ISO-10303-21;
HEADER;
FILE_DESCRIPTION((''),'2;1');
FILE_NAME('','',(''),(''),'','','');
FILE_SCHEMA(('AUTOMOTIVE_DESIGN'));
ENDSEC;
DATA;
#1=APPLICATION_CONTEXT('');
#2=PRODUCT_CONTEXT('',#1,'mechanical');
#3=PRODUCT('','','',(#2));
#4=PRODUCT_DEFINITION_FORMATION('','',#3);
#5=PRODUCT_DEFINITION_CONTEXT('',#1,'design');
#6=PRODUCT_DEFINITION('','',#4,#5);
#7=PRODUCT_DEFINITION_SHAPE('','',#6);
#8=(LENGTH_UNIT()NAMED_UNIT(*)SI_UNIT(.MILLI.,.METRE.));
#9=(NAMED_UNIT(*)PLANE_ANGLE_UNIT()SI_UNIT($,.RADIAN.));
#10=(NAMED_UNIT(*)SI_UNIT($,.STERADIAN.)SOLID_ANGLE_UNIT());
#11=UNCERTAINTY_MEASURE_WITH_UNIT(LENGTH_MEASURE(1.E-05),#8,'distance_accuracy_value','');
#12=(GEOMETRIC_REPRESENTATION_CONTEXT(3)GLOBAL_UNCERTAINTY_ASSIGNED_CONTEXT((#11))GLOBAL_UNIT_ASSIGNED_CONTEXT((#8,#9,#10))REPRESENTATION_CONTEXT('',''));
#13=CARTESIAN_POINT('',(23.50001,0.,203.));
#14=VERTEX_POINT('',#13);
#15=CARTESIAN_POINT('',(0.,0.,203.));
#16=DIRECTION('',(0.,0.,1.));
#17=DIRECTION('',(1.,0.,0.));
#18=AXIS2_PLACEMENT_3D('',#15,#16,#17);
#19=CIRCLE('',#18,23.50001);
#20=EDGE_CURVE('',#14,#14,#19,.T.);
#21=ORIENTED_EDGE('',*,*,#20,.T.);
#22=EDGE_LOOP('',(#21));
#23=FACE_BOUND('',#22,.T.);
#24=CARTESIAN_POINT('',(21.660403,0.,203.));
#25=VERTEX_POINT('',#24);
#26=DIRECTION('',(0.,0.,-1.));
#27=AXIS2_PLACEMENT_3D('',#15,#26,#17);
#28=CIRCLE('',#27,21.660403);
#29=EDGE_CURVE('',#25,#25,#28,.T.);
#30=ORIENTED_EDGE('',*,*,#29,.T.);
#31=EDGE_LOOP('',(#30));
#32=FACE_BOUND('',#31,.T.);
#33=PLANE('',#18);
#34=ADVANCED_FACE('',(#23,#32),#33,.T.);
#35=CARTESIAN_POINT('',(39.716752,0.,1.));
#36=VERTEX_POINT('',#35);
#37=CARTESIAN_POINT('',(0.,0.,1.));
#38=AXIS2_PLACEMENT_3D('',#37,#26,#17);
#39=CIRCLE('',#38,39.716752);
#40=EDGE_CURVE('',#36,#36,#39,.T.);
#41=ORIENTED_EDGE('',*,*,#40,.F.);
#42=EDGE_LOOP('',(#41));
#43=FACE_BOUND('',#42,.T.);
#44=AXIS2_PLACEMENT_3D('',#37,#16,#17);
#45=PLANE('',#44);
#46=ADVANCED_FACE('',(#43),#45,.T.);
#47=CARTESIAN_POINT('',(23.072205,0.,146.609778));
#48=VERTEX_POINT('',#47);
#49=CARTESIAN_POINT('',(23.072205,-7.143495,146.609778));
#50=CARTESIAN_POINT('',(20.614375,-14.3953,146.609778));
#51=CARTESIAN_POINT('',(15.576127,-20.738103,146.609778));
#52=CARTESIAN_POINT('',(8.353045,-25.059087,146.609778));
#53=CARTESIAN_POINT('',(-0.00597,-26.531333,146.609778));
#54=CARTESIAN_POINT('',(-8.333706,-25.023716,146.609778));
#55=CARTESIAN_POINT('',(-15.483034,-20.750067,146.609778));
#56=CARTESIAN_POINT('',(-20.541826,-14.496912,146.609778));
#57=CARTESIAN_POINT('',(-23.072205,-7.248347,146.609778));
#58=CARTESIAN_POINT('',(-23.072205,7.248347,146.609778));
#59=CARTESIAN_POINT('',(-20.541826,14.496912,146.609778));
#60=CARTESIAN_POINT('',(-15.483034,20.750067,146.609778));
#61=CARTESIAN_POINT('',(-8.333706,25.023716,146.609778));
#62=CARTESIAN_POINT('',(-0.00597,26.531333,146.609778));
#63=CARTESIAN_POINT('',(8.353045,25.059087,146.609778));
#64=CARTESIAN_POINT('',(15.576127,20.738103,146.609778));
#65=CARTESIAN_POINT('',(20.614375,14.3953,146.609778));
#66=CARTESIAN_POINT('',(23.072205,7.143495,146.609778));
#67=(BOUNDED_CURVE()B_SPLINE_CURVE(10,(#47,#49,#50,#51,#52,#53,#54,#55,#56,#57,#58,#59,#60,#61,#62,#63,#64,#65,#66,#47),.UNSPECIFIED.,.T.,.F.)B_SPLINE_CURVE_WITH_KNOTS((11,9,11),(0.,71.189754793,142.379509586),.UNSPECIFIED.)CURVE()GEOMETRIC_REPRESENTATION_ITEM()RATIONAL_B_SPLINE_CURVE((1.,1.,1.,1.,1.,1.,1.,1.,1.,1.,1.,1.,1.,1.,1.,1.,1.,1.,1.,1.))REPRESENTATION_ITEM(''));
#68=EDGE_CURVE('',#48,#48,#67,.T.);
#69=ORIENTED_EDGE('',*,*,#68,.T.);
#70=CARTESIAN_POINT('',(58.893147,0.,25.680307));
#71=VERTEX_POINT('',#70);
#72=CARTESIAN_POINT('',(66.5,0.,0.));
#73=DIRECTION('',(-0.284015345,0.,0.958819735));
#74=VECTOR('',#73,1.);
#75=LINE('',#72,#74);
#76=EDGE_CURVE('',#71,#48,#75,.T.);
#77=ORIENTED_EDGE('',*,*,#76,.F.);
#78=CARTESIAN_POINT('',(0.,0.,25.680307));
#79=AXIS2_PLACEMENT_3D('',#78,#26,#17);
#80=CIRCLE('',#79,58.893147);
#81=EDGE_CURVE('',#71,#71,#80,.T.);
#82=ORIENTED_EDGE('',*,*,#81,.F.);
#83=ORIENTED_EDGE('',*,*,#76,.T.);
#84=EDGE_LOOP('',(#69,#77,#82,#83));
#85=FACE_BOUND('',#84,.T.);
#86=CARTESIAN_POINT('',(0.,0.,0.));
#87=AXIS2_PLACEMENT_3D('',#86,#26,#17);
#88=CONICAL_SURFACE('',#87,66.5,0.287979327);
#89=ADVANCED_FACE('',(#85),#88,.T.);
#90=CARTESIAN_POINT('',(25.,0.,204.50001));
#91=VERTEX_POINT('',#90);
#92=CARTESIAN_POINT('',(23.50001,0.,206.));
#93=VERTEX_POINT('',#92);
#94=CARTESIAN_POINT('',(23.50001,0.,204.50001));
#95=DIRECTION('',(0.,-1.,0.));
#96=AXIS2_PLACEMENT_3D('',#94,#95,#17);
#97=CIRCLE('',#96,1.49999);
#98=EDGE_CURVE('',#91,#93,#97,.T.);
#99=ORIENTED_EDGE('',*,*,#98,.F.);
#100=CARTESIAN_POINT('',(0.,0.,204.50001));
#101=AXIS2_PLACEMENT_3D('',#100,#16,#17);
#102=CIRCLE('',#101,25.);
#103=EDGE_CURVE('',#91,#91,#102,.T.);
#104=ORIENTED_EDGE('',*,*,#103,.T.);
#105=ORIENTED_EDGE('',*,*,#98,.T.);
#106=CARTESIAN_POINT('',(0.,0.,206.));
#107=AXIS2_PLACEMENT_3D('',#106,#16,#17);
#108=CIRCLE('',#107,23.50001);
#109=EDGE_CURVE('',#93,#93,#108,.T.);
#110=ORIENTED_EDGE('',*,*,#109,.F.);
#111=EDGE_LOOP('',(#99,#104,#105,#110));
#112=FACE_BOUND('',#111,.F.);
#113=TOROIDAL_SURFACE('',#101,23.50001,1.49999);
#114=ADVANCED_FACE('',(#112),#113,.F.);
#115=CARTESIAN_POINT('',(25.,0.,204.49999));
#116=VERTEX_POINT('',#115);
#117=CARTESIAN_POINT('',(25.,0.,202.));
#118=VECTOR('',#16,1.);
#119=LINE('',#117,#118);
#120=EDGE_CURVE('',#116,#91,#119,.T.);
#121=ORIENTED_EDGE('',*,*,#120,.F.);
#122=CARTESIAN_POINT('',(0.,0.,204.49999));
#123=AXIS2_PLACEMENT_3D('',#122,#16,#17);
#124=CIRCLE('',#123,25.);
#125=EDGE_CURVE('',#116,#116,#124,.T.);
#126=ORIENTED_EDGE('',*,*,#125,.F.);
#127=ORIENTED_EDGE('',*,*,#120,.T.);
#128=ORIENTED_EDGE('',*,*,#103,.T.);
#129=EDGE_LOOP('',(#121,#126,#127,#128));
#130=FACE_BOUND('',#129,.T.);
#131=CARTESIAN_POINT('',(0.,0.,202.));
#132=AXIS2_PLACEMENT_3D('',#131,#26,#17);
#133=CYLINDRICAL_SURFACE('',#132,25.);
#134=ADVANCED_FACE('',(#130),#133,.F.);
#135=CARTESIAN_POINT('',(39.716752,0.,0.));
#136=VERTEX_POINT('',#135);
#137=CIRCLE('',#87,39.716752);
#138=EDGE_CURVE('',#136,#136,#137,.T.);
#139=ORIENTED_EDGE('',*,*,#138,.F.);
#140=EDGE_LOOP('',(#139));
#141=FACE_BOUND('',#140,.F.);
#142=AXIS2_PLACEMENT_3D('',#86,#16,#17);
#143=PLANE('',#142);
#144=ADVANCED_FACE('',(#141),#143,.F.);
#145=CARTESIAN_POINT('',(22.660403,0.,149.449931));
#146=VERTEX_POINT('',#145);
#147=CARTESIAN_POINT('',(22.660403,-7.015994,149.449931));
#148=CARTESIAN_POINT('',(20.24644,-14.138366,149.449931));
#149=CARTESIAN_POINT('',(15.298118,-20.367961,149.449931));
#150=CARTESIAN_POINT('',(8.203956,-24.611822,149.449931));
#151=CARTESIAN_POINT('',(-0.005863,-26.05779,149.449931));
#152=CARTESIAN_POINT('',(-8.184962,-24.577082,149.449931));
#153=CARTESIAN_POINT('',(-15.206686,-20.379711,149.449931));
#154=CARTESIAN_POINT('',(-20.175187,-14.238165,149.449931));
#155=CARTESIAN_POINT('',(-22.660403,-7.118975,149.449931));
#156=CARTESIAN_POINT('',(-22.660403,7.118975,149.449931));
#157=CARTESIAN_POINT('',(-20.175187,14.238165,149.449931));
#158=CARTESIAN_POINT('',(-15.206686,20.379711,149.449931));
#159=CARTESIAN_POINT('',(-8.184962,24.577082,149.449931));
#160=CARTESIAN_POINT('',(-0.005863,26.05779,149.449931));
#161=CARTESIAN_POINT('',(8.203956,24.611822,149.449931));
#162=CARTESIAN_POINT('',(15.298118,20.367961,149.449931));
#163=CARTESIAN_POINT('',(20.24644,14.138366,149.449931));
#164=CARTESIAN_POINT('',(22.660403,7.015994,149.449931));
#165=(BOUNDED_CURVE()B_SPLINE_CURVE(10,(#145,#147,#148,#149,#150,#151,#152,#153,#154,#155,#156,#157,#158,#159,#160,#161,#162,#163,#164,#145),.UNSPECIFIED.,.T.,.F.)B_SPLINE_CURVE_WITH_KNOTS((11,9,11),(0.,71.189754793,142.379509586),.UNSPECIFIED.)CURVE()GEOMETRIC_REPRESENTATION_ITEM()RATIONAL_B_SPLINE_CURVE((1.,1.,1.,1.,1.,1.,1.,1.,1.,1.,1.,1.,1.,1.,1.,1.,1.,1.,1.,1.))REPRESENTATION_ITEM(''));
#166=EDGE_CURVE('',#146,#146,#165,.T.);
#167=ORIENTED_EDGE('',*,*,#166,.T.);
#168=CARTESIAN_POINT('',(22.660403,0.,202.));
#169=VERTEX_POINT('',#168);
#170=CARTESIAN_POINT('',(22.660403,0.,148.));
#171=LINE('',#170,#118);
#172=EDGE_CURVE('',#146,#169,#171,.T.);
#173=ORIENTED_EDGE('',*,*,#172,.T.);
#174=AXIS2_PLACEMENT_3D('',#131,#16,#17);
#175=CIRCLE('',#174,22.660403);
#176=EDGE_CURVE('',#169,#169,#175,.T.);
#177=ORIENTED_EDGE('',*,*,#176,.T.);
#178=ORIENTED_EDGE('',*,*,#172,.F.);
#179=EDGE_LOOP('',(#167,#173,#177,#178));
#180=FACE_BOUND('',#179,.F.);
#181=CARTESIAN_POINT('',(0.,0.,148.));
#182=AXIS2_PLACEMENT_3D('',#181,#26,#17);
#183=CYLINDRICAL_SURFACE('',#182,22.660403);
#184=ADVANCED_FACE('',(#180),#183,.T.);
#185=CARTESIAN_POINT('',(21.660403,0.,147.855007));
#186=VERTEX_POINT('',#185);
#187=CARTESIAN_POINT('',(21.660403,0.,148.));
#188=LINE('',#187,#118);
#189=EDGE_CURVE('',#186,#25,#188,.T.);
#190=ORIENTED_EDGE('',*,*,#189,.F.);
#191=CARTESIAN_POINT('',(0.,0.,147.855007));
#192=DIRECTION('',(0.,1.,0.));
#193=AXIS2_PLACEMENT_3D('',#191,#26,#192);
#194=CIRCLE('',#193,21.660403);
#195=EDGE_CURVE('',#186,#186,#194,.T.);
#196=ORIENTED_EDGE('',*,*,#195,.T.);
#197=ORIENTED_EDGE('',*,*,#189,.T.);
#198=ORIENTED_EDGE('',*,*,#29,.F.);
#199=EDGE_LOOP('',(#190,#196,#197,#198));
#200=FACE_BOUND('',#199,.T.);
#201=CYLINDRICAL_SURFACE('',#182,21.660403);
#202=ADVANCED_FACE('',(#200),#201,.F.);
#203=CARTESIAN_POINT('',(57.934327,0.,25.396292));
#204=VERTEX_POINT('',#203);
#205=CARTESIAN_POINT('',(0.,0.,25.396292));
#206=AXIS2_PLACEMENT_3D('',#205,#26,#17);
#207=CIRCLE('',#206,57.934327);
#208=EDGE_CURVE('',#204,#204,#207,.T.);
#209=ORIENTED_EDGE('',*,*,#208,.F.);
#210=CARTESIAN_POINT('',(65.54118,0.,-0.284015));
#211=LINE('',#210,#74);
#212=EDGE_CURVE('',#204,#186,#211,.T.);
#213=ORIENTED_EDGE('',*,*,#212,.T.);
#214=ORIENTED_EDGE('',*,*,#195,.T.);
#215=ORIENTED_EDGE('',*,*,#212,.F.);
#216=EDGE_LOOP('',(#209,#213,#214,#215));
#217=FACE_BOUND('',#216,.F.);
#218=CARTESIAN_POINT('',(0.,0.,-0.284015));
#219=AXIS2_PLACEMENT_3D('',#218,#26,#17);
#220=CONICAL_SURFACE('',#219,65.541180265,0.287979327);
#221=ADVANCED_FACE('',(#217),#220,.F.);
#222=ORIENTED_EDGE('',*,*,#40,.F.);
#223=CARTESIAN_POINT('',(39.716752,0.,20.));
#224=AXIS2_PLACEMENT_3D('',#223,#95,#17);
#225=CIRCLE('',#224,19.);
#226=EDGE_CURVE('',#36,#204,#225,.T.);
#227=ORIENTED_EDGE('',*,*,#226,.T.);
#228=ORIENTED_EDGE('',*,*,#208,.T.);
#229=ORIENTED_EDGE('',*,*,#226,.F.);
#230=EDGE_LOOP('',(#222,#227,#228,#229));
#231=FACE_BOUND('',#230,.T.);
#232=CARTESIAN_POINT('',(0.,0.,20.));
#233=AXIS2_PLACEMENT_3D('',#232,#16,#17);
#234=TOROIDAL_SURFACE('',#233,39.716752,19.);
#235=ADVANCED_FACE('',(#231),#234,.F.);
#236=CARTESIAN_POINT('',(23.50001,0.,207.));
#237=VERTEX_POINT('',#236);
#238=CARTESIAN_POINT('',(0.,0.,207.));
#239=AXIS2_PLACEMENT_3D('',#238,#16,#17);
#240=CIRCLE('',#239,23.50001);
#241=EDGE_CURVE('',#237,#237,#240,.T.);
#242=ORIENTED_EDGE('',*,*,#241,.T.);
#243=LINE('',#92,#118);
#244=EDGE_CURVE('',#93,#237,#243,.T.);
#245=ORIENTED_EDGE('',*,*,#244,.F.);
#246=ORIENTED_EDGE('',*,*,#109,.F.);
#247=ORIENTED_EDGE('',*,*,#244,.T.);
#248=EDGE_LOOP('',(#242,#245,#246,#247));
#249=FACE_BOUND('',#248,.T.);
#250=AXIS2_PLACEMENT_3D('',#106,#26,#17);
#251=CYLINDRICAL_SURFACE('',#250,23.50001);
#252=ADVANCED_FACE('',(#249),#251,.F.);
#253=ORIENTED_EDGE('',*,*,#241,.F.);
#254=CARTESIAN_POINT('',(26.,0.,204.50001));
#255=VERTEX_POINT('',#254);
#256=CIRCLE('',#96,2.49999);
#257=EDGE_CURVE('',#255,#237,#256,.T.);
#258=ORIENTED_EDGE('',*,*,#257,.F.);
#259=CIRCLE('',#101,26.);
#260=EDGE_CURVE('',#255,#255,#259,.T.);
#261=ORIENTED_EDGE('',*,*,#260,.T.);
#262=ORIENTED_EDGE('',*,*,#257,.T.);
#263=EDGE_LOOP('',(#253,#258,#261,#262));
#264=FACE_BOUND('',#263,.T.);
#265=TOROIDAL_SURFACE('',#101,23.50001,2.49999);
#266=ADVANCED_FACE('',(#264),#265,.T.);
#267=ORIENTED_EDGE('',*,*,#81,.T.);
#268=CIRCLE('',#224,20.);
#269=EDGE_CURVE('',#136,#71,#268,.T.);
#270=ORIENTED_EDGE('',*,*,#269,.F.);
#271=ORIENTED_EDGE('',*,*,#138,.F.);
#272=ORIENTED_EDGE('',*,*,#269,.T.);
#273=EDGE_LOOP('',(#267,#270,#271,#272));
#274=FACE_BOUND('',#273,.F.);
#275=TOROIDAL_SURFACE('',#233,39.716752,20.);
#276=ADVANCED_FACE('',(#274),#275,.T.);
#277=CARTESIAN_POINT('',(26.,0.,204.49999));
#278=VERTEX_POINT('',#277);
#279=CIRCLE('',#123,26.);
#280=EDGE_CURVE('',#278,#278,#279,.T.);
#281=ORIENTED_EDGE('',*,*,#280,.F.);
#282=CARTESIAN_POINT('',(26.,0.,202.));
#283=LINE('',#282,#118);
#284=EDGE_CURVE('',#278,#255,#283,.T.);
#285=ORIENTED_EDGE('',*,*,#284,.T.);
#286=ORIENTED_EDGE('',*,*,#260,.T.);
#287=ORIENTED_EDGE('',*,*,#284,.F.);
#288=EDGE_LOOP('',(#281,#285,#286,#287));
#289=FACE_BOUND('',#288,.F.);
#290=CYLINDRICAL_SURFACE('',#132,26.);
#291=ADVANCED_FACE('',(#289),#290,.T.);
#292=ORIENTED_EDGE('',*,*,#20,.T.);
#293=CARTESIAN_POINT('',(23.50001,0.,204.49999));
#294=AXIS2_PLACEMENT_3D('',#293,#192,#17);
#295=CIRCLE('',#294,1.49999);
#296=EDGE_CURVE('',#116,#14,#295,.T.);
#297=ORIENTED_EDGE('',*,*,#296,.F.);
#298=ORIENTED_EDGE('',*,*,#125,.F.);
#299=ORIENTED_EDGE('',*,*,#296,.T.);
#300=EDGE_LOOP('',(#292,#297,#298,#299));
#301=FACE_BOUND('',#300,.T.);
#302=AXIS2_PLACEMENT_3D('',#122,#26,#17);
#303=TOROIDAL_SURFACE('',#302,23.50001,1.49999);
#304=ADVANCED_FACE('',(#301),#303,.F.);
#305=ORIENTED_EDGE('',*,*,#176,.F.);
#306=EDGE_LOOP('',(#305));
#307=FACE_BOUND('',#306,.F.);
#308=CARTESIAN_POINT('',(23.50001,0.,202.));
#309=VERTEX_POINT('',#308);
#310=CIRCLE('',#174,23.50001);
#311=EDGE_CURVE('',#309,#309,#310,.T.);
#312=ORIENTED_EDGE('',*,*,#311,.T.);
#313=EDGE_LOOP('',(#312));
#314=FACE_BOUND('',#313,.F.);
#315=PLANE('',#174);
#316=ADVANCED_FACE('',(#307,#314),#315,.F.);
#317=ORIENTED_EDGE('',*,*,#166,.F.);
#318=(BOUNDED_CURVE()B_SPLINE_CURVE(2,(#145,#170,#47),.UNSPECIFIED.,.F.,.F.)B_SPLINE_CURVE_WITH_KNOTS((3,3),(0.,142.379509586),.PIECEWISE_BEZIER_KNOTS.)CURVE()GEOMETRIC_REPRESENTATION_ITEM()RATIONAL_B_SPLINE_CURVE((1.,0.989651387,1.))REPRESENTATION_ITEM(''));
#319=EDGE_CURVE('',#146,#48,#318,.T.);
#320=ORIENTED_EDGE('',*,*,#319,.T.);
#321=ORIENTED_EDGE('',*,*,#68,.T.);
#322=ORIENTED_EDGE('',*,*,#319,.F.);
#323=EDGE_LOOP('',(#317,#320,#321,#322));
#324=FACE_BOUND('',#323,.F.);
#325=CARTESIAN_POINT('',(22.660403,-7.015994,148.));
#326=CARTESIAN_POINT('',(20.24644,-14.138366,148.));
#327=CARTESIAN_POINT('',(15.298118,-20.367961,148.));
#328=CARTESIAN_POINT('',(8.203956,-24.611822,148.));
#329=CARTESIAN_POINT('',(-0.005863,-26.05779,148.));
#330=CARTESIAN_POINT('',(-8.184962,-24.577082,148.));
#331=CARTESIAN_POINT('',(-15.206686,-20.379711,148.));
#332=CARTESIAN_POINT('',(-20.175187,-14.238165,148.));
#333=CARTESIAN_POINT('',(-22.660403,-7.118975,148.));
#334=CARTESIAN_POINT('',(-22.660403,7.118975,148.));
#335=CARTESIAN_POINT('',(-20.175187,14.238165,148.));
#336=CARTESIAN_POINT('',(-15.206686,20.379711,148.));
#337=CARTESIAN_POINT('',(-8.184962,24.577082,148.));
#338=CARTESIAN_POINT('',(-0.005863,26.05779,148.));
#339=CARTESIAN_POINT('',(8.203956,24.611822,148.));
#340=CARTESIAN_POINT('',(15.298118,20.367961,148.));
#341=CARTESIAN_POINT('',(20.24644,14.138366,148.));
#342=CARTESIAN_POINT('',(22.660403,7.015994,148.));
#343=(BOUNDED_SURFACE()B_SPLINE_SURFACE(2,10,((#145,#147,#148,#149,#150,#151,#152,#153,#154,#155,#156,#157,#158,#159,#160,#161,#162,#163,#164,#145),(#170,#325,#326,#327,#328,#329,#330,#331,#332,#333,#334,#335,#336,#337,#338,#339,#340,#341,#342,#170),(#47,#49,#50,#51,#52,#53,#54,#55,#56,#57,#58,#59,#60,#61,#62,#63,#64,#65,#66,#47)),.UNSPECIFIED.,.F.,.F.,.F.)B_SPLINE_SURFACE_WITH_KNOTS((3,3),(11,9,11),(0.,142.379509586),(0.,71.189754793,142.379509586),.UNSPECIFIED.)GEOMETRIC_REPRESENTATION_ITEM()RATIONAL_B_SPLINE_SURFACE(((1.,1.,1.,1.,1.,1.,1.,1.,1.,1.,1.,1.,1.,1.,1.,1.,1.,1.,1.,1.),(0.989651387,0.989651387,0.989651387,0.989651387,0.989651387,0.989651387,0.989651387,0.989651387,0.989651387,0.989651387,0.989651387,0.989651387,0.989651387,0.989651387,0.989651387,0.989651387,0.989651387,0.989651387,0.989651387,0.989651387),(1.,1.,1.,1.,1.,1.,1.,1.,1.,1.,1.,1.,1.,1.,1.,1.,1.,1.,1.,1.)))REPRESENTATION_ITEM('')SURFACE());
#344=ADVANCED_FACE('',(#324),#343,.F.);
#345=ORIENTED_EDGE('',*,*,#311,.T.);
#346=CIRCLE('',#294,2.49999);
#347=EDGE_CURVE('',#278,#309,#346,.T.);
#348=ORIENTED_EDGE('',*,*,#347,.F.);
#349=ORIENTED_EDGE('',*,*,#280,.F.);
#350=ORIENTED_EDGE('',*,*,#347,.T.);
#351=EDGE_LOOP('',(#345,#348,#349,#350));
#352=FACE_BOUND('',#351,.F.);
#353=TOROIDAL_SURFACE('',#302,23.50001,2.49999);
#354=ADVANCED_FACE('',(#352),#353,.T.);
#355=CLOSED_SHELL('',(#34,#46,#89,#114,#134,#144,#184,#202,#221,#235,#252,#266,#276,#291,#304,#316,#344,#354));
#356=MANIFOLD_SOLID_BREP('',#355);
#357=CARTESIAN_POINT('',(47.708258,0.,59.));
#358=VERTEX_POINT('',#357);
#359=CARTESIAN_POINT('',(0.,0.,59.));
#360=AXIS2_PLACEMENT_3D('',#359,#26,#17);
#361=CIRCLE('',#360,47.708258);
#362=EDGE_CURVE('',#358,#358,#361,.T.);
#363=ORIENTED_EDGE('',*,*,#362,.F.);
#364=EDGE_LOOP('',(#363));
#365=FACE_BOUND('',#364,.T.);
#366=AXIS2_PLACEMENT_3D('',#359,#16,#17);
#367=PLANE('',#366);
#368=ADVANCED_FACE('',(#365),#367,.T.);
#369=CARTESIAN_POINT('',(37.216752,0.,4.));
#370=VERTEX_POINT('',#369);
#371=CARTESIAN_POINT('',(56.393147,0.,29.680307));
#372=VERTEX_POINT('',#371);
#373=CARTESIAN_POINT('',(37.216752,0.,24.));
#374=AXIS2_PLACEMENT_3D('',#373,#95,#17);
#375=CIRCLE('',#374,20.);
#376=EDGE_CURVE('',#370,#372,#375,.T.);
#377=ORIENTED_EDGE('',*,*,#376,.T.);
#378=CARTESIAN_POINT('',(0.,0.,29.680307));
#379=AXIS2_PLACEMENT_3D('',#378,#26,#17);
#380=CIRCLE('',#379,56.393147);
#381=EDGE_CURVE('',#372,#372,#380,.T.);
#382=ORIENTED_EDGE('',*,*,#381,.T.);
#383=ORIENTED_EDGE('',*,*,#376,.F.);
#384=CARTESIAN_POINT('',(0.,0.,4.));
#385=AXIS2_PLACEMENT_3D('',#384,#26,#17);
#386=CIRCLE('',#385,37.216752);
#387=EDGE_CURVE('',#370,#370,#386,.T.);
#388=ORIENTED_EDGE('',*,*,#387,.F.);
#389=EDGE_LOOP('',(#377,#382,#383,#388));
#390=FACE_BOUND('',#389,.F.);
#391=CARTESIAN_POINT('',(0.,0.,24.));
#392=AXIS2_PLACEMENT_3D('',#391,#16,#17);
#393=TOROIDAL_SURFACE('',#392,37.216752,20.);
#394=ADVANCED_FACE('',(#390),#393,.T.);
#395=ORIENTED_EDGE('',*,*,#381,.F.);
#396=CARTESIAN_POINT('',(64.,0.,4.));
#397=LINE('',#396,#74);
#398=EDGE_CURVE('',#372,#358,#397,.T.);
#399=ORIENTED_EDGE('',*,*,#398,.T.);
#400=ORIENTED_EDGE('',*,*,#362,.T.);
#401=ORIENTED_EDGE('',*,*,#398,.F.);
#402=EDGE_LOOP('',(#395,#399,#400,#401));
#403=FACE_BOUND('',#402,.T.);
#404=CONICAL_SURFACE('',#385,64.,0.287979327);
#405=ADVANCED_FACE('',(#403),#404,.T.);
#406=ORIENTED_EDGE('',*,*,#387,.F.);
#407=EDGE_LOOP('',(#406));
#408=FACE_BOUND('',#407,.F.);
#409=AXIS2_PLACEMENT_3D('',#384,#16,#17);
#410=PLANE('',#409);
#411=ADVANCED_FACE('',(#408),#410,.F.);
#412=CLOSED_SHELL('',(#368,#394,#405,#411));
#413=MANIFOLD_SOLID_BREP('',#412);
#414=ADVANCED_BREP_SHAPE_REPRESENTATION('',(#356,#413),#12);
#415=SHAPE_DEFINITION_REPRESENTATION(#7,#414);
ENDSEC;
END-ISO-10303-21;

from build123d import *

# Parameters (mm, degrees)
F1_R      = 64
F2_DEPTH  = 55
F2_TAPER  = 16.5
F3_R      = 66.5
F4_DEPTH  = 148
F4_TAPER  = 16.5
F5_R      = 20
F6_R      = 20
F7_R      = 22.6604027456
F8_DEPTH  = 54
F9_R      = 26
F10_DEPTH = 5
F11_R     = 2.49999
F12_T     = -1
F13_R     = 10


# Not quite as in the source:
# - a fillet or chamfer is up to 0.001 mm smaller than in the source, because OpenCascade refuses the exact size
# - a shell that OpenCascade refuses in one call is made with other operations: the cavity is built on its own and cut out


with BuildPart() as f2:
    # F1 (on offset) → F2 (new body)
    with BuildSketch(Plane.XY.offset(4)):
        Circle(F1_R)
    extrude(amount=F2_DEPTH, taper=F2_TAPER)

    # F6
    f6_edges = [f2.edges().sort_by_distance(p)[0] for p in [
        (-64, 0, 4),
    ]]
    fillet(f6_edges, radius=F6_R)


with BuildPart() as f4:
    # F3 (on Top) → F4 (new body)
    with BuildSketch(Plane.XY):
        Circle(F3_R)
    extrude(amount=F4_DEPTH, taper=F4_TAPER)

    # F5
    f5_edges = [f4.edges().sort_by_distance(p)[0] for p in [
        (-66.5, 0, 0),
    ]]
    fillet(f5_edges, radius=F5_R)

    # F7 (on face) → F8 (join)
    with BuildSketch(Plane.XY.offset(148)):
        Circle(F7_R)
    extrude(amount=F8_DEPTH)

    # F9 (on face) → F10 (join)
    with BuildSketch(Plane.XY.offset(202)):
        Circle(F9_R)
    extrude(amount=F10_DEPTH)

    # F11 (radius 2.5 in the source; OpenCascade refuses exactly that, so slightly less here)
    f11_edges = [f4.edges().sort_by_distance(p)[0] for p in [
        (-26, 0, 207),
        (-26, 0, 202),
    ]]
    fillet(f11_edges, radius=F11_R)

    # F12: a shell. OpenCascade refuses it in one call, so the cavity is built on its own and cut out:
    # the body offset inwards by the wall thickness, plus a prism from it out through each open face.
    f12_core = offset(f4.part, amount=F12_T, kind=Kind.INTERSECTION, mode=Mode.PRIVATE)
    f12_exits = [f12_core.faces().sort_by_distance(p)[0] for p in [
        (0, 0, 206),
    ]]
    add(f12_core, mode=Mode.SUBTRACT)
    extrude(f12_exits, amount=-F12_T, mode=Mode.SUBTRACT)

    # F13
    f13_edges = [f4.edges().sort_by_distance(p)[0] for p in [
        (-22.660403, 0, 148),
    ]]
    fillet(f13_edges, radius=F13_R)


solid = Compound([f2.part, f4.part])
